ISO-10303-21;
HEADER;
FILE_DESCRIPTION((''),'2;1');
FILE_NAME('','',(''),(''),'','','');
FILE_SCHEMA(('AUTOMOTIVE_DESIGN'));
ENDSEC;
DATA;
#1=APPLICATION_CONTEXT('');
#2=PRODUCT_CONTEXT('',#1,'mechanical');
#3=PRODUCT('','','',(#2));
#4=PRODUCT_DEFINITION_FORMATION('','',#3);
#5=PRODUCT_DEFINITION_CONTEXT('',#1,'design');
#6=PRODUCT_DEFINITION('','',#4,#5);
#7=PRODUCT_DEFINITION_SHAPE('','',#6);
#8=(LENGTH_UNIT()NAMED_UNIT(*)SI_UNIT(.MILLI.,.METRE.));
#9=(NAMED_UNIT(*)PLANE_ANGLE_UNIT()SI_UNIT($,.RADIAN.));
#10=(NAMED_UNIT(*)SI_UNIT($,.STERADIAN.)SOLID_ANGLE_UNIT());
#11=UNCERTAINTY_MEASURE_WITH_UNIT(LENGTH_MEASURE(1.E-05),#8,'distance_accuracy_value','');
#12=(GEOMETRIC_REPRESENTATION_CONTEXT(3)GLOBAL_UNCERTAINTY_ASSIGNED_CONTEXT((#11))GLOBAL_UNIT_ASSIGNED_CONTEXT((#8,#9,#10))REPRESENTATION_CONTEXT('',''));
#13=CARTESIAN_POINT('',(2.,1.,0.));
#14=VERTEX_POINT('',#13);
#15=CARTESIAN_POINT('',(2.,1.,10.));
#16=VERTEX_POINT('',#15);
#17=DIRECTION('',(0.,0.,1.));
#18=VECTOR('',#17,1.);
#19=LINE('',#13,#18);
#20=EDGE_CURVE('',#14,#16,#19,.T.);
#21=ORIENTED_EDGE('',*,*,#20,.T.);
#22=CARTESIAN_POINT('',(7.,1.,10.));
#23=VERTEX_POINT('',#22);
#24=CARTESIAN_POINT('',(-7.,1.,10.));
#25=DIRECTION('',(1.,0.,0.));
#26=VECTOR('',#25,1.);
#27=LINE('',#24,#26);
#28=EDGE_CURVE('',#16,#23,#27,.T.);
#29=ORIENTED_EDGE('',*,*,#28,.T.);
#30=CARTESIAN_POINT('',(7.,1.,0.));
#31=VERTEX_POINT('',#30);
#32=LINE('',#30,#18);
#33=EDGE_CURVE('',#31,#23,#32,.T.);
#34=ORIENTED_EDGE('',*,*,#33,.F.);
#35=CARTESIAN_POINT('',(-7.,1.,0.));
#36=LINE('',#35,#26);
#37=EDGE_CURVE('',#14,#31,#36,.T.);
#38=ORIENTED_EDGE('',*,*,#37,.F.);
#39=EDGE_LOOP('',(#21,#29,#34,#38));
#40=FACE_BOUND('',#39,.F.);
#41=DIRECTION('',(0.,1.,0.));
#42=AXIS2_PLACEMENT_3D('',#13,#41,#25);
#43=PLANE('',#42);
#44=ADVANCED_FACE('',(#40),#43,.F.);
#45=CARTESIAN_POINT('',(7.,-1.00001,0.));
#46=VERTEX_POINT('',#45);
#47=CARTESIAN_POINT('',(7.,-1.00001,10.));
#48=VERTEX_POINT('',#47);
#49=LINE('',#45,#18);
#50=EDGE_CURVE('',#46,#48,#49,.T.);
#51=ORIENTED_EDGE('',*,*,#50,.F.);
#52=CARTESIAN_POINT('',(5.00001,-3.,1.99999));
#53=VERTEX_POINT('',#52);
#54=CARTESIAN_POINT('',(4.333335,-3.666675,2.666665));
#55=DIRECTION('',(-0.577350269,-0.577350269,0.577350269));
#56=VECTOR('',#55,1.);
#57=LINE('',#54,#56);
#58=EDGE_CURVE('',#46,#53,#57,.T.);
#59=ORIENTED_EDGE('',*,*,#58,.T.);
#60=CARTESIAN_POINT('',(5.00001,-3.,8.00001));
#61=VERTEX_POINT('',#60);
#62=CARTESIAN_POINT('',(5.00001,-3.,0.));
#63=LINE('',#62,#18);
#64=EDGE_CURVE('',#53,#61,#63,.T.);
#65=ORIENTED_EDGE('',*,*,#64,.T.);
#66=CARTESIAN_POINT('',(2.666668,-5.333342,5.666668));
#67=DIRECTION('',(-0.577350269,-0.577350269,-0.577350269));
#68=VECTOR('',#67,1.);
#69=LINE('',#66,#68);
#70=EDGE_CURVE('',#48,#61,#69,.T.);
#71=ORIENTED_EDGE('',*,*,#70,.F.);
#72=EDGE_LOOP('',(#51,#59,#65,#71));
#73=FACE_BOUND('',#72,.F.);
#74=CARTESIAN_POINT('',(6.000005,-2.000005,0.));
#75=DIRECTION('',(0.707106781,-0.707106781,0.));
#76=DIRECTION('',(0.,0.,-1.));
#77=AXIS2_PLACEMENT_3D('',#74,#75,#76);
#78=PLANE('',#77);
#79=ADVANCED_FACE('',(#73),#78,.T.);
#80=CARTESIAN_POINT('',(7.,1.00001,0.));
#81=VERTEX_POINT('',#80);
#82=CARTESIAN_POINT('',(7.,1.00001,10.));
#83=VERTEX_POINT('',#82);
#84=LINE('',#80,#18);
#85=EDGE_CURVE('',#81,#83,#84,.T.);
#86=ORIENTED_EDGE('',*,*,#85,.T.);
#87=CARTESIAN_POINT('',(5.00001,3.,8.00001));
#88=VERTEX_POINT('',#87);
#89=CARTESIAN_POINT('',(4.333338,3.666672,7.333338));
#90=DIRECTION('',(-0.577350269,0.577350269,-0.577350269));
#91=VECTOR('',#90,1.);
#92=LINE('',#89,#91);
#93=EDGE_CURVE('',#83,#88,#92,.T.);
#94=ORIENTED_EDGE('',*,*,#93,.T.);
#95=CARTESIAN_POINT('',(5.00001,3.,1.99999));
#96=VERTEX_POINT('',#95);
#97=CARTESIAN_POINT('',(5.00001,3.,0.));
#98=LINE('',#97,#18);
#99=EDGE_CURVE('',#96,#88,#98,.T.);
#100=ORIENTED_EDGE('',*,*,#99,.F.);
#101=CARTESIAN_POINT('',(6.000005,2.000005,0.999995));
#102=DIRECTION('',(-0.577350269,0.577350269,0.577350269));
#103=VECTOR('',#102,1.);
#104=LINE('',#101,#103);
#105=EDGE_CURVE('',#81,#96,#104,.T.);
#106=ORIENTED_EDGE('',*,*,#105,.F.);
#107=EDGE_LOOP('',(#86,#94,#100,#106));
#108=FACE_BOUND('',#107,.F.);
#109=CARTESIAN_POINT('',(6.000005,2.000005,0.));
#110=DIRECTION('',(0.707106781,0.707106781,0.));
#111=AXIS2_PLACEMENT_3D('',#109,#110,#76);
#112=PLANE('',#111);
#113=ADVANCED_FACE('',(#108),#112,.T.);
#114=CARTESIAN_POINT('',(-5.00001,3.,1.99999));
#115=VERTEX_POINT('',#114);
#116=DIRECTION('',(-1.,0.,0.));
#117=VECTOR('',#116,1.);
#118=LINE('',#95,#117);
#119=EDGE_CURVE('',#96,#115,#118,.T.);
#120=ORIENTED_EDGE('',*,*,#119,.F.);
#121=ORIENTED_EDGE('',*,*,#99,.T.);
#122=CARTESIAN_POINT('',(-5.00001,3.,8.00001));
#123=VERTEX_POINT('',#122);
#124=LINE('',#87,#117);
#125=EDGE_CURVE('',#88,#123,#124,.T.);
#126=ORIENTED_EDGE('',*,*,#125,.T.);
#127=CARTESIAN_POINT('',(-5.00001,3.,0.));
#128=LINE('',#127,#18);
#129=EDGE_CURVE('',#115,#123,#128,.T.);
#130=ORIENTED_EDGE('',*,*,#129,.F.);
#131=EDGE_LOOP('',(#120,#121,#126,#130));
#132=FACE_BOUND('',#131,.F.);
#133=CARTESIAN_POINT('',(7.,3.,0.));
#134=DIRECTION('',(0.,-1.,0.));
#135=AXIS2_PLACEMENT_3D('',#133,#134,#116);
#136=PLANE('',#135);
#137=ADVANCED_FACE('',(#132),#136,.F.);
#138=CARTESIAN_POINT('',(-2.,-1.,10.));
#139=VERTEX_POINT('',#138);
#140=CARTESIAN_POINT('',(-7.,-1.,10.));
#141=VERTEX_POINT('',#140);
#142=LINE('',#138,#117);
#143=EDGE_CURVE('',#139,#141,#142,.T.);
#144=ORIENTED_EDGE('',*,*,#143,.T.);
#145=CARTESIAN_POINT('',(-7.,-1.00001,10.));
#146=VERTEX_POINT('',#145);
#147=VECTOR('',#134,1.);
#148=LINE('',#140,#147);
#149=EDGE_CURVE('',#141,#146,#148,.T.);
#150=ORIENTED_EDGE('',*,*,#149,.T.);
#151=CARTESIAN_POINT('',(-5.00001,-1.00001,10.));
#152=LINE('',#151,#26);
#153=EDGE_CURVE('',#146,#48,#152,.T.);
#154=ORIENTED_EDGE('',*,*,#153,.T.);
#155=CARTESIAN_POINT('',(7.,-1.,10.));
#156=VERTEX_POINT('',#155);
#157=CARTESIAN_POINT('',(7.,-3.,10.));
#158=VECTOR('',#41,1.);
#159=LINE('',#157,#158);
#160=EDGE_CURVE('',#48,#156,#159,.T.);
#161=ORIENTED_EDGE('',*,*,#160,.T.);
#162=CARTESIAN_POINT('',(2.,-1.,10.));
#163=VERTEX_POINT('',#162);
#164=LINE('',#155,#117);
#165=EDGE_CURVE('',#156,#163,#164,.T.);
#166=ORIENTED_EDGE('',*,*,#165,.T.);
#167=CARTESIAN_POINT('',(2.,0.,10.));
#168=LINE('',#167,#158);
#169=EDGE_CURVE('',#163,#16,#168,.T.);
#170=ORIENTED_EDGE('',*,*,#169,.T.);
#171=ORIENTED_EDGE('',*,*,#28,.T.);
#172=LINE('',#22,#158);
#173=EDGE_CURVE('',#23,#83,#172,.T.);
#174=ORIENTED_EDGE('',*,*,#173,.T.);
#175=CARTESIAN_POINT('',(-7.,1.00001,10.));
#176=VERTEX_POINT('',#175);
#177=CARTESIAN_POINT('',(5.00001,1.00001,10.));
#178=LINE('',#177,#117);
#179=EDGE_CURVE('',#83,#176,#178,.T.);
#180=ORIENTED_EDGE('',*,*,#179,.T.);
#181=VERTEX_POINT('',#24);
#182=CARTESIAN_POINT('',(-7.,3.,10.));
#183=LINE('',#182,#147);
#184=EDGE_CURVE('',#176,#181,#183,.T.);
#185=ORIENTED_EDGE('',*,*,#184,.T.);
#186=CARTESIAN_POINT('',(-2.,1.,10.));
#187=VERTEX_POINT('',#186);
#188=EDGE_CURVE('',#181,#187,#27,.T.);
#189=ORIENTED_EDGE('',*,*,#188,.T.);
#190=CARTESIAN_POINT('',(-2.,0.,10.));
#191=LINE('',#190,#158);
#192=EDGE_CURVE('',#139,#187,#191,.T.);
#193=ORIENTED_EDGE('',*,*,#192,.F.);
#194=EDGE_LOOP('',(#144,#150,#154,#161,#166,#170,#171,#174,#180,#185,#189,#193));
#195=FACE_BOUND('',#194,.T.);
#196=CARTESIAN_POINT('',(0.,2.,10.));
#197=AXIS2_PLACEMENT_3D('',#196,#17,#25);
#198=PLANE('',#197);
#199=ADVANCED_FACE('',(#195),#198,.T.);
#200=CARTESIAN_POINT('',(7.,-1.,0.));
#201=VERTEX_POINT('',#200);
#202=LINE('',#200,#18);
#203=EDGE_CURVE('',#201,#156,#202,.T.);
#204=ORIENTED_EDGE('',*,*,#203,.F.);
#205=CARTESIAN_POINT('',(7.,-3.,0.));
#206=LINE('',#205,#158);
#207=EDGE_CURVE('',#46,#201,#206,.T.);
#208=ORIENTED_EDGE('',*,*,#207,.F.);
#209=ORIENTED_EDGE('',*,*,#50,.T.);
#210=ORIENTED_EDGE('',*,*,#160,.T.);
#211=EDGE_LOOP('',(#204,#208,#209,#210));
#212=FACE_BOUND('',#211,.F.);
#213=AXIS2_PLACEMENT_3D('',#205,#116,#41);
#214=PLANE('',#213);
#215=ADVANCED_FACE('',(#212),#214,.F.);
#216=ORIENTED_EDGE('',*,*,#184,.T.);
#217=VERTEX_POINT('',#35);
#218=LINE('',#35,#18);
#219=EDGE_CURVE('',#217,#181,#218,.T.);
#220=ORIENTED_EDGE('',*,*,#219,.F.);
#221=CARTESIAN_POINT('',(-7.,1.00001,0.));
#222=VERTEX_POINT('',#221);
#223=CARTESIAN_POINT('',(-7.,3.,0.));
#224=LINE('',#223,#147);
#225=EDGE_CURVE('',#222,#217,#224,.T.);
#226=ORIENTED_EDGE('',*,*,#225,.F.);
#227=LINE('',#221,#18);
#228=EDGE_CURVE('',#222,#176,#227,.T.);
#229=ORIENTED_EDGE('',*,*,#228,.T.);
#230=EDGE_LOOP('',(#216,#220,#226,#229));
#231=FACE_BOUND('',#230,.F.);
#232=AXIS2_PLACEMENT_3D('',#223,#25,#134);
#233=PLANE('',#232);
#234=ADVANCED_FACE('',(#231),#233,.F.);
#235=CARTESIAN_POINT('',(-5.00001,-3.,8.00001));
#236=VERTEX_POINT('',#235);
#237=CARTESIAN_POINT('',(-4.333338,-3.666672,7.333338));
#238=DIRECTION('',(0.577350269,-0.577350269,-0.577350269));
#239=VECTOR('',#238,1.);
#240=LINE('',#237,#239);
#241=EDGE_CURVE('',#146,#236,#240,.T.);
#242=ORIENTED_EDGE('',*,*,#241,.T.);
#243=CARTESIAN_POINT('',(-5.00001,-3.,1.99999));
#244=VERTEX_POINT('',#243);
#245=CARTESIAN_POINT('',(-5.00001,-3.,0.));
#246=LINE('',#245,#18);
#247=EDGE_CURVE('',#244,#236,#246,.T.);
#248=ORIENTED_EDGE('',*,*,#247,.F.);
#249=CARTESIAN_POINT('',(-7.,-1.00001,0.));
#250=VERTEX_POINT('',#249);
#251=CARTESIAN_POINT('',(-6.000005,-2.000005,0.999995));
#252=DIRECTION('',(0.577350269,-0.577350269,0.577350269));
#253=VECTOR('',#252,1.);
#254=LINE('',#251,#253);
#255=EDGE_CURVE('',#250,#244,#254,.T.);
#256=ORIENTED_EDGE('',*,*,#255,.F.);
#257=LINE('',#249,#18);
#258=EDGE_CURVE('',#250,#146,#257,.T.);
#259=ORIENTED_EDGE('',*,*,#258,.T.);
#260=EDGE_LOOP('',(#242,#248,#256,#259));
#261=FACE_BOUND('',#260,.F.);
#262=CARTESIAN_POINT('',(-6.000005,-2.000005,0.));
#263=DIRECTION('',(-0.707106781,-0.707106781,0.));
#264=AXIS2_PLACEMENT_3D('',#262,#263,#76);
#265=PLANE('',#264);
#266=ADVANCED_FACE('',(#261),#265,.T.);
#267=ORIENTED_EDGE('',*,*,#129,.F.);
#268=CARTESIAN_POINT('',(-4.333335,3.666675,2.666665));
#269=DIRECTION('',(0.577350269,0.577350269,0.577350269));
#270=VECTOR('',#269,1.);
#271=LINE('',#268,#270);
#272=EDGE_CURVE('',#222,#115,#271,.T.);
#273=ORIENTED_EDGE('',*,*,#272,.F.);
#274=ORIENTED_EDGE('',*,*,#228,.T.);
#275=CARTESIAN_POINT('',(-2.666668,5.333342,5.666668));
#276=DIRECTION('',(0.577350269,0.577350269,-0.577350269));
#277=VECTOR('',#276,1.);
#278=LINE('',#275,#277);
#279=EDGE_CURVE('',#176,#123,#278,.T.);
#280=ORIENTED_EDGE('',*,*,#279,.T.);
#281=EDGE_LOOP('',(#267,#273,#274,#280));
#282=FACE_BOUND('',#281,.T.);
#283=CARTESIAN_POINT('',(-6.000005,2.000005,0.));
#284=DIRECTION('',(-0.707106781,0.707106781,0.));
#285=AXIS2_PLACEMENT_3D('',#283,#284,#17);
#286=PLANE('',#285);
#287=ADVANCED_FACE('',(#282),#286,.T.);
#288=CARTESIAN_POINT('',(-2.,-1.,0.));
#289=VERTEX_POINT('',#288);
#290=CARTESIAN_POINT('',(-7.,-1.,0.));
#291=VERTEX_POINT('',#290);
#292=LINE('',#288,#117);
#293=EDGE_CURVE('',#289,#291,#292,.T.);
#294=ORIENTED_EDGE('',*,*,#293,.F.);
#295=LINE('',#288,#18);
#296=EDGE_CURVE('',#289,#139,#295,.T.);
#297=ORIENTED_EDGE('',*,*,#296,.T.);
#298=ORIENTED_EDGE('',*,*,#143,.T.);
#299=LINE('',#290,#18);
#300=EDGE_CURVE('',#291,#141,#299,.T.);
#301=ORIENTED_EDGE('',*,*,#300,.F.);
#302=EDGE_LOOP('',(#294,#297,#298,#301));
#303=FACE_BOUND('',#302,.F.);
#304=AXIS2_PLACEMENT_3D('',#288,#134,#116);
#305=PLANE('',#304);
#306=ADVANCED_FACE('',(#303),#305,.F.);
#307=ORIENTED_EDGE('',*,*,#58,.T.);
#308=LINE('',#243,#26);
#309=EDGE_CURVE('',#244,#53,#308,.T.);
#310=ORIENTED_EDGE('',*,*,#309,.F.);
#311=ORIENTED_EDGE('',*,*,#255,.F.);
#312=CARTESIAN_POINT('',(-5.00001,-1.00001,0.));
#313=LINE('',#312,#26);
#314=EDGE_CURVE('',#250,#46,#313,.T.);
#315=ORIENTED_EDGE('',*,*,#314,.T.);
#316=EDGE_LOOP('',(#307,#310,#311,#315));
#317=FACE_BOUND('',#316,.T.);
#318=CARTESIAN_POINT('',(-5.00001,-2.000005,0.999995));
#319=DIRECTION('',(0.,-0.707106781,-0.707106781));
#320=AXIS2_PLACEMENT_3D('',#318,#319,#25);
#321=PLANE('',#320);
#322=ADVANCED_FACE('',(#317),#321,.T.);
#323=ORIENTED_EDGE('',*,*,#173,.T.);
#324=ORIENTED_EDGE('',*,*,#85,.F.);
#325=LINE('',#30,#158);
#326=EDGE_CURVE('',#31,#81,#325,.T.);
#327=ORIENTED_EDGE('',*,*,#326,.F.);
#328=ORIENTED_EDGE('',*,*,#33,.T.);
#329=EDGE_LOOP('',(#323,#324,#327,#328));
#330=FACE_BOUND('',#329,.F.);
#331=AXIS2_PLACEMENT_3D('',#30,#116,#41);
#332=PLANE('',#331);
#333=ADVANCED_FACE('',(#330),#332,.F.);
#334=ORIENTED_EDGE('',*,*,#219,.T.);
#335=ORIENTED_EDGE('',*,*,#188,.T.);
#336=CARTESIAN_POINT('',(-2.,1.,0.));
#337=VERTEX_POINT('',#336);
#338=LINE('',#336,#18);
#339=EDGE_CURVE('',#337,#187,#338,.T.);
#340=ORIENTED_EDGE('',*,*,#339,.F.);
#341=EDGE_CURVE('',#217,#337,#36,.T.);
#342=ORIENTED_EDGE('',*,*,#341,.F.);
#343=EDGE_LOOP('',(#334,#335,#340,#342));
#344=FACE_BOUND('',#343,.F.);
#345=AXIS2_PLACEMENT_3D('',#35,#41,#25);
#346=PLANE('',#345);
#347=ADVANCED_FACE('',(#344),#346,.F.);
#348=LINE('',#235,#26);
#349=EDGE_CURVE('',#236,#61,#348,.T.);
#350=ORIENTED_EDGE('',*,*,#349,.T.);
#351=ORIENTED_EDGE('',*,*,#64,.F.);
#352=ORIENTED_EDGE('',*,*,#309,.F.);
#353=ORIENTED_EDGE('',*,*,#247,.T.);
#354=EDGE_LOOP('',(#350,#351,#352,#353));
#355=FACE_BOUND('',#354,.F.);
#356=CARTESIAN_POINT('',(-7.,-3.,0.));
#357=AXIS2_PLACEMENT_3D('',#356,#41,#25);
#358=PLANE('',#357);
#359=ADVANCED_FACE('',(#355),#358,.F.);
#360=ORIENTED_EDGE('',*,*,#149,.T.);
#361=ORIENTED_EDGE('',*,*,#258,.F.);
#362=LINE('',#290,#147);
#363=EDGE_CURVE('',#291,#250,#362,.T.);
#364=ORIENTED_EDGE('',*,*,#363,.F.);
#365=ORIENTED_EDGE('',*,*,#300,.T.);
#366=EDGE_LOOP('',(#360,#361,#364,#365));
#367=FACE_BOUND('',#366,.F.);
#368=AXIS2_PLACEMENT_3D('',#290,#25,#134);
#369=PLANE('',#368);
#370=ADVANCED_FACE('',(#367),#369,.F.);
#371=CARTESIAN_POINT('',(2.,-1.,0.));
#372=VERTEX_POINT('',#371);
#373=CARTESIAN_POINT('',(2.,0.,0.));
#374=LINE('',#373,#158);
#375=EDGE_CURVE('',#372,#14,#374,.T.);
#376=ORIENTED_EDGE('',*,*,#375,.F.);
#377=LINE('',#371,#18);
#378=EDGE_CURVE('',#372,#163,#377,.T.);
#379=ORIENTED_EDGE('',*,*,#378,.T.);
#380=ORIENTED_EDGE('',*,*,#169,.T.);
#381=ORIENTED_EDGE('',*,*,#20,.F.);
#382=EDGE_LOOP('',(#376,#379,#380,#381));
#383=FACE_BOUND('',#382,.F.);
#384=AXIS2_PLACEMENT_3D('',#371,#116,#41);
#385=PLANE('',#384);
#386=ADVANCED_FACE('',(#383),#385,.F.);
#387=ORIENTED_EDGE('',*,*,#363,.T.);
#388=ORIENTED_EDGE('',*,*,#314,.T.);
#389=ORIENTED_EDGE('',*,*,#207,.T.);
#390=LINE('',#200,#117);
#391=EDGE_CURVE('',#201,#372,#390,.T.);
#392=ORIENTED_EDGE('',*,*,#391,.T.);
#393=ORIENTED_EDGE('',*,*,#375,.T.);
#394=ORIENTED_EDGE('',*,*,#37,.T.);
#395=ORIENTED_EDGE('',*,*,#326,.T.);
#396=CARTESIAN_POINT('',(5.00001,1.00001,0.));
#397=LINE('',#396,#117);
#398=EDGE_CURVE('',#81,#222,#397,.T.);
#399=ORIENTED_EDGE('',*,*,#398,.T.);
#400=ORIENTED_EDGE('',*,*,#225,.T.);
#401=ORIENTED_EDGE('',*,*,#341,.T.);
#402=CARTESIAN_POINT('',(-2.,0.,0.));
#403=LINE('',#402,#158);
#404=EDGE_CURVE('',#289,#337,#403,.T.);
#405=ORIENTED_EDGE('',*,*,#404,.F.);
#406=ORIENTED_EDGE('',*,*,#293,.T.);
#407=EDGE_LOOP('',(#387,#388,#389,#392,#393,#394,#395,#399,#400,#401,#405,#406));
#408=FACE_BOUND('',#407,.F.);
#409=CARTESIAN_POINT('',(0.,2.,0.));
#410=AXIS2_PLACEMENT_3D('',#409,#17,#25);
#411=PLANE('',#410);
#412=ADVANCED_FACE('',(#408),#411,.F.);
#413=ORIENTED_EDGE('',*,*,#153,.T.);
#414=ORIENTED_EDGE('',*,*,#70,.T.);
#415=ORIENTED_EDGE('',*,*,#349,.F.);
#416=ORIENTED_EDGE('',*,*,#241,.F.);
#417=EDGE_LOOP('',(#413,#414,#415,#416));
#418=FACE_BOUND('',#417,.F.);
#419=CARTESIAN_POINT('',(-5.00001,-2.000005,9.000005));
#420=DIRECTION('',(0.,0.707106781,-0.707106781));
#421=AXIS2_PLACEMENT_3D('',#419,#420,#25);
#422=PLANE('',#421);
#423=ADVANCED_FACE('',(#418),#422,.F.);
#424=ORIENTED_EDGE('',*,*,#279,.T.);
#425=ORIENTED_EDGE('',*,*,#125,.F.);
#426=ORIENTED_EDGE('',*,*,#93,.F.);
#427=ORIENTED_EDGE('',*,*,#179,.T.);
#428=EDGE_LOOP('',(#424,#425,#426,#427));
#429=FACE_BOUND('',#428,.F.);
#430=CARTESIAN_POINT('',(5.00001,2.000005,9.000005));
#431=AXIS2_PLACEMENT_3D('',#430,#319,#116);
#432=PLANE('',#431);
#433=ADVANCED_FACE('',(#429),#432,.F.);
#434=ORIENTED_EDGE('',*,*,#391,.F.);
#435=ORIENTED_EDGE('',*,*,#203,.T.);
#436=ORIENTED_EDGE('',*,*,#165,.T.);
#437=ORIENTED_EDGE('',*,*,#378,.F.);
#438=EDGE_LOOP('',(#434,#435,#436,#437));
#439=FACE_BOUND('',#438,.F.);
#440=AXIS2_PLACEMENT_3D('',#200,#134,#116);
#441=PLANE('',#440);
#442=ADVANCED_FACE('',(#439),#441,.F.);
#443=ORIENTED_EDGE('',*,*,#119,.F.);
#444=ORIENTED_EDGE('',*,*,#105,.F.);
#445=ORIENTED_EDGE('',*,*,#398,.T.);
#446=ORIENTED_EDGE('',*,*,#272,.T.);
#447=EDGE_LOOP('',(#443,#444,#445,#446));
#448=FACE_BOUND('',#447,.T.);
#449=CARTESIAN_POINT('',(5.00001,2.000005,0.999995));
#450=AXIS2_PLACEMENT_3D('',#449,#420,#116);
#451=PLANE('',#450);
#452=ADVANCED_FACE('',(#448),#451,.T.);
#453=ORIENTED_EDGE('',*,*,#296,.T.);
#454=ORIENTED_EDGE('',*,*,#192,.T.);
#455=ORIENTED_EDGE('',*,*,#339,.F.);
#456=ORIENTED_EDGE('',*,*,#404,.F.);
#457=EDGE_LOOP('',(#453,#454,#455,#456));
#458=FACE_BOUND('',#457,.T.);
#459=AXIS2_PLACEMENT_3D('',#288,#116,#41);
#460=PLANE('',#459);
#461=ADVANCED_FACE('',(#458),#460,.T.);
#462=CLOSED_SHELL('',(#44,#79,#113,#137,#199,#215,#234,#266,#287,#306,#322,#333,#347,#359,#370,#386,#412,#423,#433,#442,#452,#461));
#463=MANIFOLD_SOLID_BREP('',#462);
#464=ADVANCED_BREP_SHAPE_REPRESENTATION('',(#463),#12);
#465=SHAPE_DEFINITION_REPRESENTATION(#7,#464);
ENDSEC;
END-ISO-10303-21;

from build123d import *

# Parameters (mm, degrees)
F0_W     = 4
F0_H     = 2
F1_DEPTH = 10
F2_SIZE  = 1.99999
F3_SIZE  = 1.99999


# Not quite as in the source:
# - a fillet or chamfer is up to 0.001 mm smaller than in the source, because OpenCascade refuses the exact size


with BuildPart() as f1:
    # F0 (on Top) → F1 (new body)
    with BuildSketch(Plane.XY):
        Polygon((-7, 3), (-7, 1), (-2, 1), (2, 1), (7, 1), (7, 3), align=None)
        Rectangle(F0_W, F0_H)
        Polygon((-2, -1), (-7, -1), (-7, -3), (7, -3), (7, -1), (2, -1), align=None)
    extrude(amount=F1_DEPTH)

    # F2 (size 2 in the source; OpenCascade refuses exactly that, so slightly less here)
    f2_edges = [f1.edges().sort_by_distance(p)[0] for p in [
        (-7, 3, 5),
        (7, 3, 5),
        (7, -3, 5),
        (-7, -3, 5),
    ]]
    chamfer(f2_edges, length=F2_SIZE)

    # F3 (size 2 in the source; OpenCascade refuses exactly that, so slightly less here)
    f3_edges = [f1.edges().sort_by_distance(p)[0] for p in [
        (0, 3, 10),
        (0, -3, 10),
        (0, -3, 0),
        (0, 3, 0),
    ]]
    chamfer(f3_edges, length=F3_SIZE)


solid = f1.part
